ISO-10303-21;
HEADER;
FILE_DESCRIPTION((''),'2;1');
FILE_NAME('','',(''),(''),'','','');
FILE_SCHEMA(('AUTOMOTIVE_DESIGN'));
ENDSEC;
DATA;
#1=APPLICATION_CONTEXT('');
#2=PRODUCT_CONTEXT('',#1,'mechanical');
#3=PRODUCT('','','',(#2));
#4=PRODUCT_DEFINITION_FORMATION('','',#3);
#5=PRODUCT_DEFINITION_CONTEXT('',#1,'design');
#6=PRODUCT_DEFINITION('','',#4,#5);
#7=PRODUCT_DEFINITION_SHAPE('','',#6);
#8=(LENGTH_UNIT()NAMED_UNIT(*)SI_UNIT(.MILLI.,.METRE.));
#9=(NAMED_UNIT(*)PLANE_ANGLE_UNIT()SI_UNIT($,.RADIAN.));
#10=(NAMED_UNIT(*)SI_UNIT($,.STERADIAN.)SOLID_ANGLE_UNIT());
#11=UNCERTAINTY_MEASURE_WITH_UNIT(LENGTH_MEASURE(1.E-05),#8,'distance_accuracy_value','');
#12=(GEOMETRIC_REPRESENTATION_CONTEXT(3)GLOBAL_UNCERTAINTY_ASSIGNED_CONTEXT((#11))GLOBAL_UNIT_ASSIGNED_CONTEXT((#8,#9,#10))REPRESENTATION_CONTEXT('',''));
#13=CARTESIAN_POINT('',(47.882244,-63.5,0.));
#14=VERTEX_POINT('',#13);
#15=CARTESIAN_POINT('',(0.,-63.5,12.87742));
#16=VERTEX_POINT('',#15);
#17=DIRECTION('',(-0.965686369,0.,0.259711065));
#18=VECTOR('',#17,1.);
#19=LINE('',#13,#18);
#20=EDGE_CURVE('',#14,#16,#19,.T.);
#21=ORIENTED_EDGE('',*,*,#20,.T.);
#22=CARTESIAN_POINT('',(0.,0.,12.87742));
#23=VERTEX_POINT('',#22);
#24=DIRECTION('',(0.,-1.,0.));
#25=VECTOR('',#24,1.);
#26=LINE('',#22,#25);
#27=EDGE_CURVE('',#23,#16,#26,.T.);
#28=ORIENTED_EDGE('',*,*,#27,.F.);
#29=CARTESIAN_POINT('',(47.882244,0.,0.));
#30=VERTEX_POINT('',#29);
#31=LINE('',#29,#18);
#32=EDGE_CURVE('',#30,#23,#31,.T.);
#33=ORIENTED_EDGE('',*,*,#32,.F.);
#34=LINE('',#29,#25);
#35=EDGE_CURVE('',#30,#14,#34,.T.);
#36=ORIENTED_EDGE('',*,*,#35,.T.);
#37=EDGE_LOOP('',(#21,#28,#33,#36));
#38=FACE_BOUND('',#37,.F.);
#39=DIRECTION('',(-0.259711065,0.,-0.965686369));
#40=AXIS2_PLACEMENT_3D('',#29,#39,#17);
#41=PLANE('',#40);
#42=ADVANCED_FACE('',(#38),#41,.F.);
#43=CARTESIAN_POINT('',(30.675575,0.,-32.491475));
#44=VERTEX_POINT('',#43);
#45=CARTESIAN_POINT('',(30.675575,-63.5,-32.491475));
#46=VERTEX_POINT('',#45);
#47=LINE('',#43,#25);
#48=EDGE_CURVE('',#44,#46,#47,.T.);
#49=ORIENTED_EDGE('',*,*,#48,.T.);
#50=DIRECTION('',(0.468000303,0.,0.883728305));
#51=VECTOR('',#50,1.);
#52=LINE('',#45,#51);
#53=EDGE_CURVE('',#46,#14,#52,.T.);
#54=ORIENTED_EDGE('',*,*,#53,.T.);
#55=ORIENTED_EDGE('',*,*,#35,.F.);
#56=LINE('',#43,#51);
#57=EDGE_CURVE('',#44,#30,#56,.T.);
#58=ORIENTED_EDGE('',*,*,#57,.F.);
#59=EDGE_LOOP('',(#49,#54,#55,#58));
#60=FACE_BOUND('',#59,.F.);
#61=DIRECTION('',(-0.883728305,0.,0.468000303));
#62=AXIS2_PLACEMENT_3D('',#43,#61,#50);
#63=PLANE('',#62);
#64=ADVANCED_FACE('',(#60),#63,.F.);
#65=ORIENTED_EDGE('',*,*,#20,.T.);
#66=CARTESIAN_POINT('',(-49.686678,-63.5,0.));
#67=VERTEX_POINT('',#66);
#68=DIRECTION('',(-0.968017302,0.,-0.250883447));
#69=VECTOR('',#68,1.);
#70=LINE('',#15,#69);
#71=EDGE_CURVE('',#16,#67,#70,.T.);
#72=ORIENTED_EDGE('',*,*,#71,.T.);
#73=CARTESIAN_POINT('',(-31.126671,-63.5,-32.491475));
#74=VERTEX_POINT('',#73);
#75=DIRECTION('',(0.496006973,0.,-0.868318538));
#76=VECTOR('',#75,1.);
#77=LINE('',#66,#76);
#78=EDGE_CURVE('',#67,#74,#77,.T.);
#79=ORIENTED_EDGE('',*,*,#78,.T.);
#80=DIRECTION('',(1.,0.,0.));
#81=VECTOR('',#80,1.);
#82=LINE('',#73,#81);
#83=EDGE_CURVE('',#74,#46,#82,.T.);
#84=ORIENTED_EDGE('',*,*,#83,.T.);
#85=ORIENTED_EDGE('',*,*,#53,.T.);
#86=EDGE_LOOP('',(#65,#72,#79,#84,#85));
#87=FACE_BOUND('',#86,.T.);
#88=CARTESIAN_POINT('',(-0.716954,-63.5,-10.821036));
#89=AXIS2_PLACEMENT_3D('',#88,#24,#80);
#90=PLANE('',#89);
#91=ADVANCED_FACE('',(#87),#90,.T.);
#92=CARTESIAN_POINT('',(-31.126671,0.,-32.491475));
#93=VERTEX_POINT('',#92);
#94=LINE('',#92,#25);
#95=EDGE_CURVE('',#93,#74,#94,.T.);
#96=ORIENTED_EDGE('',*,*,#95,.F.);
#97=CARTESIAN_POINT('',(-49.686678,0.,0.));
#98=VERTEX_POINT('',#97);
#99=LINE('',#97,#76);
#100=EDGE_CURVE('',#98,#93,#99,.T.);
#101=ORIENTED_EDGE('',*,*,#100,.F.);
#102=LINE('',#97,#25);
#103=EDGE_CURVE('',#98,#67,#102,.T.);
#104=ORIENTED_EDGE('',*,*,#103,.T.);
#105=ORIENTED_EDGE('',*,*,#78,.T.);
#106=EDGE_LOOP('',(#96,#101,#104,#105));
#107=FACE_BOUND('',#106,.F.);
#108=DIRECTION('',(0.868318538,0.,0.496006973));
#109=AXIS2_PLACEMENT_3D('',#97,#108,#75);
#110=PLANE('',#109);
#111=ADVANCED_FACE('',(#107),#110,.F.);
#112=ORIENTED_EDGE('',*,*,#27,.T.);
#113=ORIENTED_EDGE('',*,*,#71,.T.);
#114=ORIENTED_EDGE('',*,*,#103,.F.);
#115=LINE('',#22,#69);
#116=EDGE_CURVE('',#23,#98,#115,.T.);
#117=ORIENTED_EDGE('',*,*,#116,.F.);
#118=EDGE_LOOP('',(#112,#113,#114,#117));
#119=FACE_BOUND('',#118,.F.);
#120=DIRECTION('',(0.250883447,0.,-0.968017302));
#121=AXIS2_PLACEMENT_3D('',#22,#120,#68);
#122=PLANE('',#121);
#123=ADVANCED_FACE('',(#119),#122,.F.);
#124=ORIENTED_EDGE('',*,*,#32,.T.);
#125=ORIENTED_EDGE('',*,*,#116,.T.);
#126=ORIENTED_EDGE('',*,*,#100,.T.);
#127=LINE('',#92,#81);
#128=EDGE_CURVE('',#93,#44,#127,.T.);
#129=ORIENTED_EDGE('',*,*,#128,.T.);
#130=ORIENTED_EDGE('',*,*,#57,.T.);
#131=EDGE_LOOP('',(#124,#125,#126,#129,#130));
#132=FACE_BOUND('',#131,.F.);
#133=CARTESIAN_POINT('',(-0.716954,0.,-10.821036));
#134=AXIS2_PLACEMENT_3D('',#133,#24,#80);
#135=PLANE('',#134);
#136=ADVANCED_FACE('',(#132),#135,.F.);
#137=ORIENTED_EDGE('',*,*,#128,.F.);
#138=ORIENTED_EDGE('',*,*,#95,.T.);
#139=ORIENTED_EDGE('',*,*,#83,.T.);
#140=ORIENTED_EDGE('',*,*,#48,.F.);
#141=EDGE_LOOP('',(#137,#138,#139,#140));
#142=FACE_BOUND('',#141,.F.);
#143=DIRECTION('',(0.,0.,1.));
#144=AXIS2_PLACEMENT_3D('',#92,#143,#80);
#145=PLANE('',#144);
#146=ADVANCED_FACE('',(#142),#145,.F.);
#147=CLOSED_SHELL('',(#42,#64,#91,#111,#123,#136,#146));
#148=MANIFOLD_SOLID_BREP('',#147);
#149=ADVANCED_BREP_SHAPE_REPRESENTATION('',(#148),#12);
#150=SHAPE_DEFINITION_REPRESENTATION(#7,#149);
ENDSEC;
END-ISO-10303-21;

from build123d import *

# Parameters (mm, degrees)
F1_DEPTH = 63.5


# Not quite as in the source:
# - the program builds the solid bodies; features that only make, move or delete a surface that nothing else refers to are left out


with BuildPart() as f1:
    # F0 (on Front) → F1 (new body)
    with BuildSketch(Plane.XZ):
        Polygon((-31.1266705394, -32.4914753437), (30.6755751371, -32.4914753437), (47.8822439909, 0), (0, 12.877419591), (-49.6866777539, 0), align=None)
    extrude(amount=F1_DEPTH)


solid = f1.part
